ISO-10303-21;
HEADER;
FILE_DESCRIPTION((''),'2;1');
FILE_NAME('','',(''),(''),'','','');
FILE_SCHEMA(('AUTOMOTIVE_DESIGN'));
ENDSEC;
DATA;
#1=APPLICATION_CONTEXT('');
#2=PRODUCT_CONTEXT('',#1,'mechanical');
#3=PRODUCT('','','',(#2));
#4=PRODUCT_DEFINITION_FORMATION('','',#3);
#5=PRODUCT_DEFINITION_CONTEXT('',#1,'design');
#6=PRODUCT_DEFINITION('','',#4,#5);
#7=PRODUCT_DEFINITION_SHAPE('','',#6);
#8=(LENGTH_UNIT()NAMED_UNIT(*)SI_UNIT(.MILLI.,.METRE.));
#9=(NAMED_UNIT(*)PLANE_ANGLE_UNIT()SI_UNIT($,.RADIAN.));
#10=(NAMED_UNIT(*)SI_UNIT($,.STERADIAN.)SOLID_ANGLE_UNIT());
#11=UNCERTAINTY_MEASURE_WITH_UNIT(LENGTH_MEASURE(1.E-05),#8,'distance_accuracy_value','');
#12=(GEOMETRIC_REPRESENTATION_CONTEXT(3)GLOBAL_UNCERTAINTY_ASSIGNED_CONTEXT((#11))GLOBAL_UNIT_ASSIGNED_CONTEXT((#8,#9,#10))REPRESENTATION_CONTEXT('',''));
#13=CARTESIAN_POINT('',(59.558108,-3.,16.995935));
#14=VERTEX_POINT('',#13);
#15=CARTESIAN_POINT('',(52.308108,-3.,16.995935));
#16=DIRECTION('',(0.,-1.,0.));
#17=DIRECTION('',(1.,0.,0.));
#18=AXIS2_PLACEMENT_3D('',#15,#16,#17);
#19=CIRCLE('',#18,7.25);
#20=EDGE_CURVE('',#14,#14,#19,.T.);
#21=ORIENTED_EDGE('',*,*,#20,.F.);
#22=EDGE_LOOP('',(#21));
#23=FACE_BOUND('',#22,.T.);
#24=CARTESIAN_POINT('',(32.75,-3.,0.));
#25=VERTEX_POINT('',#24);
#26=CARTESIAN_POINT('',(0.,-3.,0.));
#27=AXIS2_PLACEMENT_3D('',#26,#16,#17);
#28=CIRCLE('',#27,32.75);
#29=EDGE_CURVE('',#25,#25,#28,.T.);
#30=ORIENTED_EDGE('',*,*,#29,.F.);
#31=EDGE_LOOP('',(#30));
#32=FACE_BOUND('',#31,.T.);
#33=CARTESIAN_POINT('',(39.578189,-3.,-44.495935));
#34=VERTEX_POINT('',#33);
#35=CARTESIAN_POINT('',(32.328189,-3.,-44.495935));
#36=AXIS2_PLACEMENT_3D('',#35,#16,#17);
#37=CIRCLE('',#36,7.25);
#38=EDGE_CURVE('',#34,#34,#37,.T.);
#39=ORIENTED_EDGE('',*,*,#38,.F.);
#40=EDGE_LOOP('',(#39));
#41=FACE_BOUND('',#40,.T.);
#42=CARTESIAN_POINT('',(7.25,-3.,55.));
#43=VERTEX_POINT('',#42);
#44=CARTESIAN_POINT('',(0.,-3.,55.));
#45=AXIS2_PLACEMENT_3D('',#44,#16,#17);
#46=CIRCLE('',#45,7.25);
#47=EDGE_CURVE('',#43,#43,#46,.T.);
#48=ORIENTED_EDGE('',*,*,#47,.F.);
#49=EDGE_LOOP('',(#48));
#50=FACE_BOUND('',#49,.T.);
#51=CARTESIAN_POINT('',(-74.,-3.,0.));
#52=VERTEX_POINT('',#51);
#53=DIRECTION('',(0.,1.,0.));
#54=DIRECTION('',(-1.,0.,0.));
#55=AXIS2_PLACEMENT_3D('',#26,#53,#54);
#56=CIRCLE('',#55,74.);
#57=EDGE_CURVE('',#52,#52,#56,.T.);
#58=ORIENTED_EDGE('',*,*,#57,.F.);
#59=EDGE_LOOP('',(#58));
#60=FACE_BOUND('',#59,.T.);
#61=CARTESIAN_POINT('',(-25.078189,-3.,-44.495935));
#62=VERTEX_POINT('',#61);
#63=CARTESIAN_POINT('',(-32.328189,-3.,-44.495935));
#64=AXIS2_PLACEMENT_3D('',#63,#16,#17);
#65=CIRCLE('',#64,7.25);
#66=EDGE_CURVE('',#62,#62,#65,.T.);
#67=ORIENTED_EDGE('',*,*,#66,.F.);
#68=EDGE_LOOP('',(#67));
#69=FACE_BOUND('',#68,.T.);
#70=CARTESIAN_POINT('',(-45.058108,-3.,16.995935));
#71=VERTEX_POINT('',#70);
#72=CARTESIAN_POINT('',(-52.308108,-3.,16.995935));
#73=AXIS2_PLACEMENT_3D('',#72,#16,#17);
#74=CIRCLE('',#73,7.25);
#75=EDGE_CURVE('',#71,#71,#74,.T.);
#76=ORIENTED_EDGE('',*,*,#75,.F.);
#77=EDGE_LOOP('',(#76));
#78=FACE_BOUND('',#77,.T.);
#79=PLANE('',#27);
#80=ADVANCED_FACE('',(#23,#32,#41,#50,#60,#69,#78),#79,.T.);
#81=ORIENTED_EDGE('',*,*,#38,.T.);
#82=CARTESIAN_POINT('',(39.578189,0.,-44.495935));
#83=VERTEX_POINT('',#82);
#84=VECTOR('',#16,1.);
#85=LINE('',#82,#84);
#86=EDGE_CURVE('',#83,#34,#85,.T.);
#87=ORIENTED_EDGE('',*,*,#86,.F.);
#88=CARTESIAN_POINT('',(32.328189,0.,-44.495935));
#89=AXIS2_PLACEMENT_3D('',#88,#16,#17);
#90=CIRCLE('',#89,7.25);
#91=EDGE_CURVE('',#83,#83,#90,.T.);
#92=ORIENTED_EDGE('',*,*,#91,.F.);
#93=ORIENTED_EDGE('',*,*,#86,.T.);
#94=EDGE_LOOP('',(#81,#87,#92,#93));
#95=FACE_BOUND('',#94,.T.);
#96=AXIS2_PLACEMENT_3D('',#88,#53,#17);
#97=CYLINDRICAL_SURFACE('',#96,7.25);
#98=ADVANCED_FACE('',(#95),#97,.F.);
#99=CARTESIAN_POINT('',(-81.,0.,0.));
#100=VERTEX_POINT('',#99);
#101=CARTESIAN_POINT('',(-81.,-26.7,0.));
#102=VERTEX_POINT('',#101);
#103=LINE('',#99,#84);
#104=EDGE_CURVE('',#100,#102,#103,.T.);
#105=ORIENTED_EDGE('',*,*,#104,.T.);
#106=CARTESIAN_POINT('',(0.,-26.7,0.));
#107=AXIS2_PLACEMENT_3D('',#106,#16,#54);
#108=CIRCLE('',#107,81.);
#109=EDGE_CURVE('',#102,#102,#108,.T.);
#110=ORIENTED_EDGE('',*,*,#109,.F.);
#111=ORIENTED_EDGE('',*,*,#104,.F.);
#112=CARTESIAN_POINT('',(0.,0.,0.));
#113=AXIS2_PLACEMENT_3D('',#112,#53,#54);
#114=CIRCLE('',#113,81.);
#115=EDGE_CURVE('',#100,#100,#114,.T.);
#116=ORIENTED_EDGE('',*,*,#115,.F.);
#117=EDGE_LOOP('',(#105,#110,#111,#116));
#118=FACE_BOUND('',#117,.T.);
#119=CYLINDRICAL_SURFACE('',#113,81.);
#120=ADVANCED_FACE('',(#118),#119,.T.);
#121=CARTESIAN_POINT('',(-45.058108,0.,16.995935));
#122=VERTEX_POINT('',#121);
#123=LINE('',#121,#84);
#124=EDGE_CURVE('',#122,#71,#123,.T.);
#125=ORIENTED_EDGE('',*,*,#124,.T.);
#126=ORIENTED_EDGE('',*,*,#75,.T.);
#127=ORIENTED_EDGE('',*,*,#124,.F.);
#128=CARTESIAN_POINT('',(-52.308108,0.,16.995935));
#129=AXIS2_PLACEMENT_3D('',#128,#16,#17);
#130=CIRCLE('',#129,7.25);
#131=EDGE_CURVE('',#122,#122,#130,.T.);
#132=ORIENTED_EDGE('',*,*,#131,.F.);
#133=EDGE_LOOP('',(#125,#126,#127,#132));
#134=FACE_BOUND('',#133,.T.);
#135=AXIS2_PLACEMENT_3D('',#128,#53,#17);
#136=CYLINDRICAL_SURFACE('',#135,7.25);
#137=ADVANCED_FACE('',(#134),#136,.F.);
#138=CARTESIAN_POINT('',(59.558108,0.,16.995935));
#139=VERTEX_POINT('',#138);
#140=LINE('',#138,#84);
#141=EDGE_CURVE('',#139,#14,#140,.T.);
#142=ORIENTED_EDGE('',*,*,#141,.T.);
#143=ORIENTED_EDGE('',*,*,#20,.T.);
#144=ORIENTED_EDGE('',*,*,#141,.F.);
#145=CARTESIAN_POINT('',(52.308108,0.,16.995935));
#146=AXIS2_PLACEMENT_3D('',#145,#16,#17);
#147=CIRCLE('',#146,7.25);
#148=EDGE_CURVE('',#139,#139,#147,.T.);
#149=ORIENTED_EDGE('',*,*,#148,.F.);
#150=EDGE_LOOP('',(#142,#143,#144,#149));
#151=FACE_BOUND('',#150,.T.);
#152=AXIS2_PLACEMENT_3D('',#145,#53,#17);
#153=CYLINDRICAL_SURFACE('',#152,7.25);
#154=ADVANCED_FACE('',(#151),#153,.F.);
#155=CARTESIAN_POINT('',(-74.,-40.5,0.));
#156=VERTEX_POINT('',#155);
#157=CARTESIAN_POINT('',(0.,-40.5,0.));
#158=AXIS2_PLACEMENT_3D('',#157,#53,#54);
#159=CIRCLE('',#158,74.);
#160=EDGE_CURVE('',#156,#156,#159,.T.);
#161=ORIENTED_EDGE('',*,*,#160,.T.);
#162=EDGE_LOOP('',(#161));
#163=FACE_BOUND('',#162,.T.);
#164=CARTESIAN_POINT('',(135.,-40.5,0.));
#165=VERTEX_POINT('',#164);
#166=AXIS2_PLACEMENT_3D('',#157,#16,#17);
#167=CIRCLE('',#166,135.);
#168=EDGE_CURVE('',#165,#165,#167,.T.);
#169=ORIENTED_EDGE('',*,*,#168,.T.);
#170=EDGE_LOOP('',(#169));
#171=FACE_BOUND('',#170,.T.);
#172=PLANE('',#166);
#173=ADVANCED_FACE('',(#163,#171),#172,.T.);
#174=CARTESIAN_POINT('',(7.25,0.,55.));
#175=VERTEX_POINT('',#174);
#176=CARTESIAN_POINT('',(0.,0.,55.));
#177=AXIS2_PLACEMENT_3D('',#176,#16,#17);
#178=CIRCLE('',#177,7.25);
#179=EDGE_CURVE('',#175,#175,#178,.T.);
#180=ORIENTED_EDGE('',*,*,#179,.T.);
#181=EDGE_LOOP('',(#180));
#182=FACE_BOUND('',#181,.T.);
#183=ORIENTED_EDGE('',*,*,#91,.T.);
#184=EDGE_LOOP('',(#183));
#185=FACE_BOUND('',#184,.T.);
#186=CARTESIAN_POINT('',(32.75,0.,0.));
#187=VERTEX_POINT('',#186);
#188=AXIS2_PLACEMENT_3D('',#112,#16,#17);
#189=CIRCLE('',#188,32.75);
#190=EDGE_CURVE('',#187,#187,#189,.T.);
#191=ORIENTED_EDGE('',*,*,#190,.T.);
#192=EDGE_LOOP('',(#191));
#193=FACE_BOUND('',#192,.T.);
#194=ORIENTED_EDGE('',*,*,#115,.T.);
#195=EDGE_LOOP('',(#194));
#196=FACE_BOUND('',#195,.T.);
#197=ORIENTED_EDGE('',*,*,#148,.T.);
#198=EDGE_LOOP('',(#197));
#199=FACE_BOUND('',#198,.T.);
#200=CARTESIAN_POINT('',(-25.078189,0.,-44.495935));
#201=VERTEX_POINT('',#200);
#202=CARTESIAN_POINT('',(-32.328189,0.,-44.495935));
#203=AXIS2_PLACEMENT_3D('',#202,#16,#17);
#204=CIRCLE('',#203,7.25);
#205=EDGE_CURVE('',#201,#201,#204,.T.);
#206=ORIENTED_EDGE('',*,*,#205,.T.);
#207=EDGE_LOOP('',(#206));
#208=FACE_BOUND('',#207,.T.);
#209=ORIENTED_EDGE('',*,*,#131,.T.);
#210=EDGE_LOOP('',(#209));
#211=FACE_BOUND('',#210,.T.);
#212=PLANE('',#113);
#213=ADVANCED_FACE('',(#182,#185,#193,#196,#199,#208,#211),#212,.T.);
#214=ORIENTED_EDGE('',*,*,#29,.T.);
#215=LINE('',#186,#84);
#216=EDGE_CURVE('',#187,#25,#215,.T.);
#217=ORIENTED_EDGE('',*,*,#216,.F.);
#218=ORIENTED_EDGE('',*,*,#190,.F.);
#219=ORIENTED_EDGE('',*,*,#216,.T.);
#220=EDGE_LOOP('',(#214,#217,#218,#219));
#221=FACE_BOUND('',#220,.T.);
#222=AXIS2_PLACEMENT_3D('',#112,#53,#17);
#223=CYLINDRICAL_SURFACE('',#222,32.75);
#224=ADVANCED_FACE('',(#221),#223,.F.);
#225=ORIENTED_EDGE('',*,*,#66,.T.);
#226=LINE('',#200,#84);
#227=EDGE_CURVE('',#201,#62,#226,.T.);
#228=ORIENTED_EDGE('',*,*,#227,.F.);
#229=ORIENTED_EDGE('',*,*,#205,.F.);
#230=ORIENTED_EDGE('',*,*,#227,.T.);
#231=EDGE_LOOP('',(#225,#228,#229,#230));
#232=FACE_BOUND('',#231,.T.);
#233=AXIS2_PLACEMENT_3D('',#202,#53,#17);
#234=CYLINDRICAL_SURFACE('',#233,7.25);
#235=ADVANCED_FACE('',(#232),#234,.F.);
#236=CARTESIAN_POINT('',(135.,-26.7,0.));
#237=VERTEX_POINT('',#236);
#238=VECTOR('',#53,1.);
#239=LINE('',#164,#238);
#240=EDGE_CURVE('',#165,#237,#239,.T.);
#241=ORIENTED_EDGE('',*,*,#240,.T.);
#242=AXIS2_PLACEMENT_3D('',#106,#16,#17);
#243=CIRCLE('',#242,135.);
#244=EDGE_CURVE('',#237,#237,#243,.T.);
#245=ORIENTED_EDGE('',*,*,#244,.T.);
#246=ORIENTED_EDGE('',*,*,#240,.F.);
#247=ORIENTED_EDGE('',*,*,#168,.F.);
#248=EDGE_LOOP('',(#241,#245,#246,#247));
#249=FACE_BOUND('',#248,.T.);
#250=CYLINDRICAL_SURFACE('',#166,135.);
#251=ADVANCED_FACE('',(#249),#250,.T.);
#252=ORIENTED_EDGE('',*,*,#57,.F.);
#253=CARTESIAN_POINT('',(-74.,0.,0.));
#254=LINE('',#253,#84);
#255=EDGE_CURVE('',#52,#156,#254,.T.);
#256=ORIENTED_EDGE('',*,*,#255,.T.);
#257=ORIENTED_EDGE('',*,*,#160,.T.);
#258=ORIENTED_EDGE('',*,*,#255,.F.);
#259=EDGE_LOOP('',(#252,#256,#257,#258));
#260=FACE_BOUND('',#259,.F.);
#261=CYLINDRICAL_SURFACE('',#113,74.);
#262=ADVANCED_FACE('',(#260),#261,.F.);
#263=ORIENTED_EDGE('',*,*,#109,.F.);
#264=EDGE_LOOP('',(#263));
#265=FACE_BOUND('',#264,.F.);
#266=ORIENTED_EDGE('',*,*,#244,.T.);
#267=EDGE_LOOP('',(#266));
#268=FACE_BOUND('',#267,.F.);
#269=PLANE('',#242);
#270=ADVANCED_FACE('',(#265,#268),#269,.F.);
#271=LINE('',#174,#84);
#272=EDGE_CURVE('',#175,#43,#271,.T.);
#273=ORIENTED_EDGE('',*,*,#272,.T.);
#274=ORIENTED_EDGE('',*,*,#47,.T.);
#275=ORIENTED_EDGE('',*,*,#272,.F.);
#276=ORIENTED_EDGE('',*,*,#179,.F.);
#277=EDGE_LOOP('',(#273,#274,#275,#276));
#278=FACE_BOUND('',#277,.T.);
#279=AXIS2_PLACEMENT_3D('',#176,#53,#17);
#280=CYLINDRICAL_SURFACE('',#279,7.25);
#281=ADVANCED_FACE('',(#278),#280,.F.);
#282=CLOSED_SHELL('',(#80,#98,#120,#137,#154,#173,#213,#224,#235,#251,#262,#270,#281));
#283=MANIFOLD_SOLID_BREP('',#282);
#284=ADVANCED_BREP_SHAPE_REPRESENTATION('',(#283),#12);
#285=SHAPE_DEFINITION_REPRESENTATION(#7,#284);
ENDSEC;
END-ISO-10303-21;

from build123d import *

# Parameters (mm, degrees)
F0_R     = 74
F0_R_2   = 7.25
F0_R_3   = 32.75
F1_DEPTH = 3
F2_R     = 81
F2_R_2   = 74
F3_DEPTH = 40.5
F4_R     = 135
F4_R_2   = 81
F5_DEPTH = 13.8


with BuildPart() as f1:
    # F0 (on Front) → F1 (new body)
    with BuildSketch(Plane.XZ):
        Circle(F0_R)
        with Locations((-32.3281888761, -44.4959346906)):
            Circle(F0_R_2, mode=Mode.SUBTRACT)
        with Locations((32.3281888761, -44.4959346906)):
            Circle(F0_R_2, mode=Mode.SUBTRACT)
        with Locations((-52.3081083962, 16.9959346906)):
            Circle(F0_R_2, mode=Mode.SUBTRACT)
        Circle(F0_R_3, mode=Mode.SUBTRACT)
        with Locations((52.3081083962, 16.9959346906)):
            Circle(F0_R_2, mode=Mode.SUBTRACT)
        with Locations((0, 55)):
            Circle(F0_R_2, mode=Mode.SUBTRACT)
    extrude(amount=F1_DEPTH)

    # F2 (on face) → F3 (join)
    with BuildSketch(Plane(origin=(0, 0, 0), x_dir=(-1, 0, 0), z_dir=(0, 1, 0))):
        Circle(F2_R)
        Circle(F2_R_2, mode=Mode.SUBTRACT)
    extrude(amount=-F3_DEPTH)

    # F4 (on face) → F5 (join)
    with BuildSketch(Plane.XZ.offset(40.5)):
        Circle(F4_R)
        Circle(F4_R_2, mode=Mode.SUBTRACT)
    extrude(amount=-F5_DEPTH)


solid = f1.part
